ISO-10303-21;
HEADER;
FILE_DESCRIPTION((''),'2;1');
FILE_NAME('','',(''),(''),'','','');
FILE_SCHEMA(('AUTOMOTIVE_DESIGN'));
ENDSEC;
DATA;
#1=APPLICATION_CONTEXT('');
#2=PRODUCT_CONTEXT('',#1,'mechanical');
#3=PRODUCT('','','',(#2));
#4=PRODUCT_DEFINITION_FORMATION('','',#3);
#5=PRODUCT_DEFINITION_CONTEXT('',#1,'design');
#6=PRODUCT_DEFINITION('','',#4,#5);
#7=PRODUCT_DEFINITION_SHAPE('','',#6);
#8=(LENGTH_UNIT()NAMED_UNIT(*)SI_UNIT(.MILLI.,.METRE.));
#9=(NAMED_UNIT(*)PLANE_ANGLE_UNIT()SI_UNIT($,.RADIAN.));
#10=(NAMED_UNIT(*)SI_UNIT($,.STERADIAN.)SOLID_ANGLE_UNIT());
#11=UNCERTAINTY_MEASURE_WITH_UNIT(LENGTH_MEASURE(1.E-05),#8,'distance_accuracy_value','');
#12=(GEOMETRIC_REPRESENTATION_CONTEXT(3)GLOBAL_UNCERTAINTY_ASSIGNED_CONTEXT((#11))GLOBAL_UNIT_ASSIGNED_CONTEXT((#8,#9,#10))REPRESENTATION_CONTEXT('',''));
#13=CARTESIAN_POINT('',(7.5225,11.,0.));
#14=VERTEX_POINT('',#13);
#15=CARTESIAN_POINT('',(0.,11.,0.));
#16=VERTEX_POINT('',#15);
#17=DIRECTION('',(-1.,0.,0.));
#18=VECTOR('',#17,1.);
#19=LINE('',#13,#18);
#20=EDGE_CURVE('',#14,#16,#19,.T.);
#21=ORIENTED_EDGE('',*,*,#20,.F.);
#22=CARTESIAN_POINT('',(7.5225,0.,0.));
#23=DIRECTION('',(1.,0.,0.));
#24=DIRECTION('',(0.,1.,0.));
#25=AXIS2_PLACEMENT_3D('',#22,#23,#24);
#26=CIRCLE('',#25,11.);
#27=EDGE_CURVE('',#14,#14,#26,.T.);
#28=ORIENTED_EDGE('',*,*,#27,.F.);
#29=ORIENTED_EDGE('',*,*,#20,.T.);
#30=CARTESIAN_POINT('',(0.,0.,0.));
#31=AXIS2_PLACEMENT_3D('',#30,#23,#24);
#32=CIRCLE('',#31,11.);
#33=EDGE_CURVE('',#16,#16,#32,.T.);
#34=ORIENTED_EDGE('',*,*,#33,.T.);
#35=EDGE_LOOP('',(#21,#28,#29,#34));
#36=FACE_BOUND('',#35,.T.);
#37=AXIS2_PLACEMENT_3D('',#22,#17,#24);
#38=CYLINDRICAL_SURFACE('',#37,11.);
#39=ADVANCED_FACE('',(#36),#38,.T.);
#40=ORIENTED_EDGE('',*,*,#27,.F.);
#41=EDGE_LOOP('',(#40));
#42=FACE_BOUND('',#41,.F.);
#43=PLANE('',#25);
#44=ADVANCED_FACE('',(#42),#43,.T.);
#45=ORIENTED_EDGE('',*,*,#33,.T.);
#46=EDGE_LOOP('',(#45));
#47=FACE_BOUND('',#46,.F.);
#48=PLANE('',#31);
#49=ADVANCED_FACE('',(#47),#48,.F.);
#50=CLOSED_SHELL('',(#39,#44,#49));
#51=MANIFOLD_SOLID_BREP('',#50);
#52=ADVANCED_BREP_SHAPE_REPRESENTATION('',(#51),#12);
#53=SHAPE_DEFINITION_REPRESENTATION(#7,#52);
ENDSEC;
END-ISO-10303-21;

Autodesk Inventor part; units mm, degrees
ref_plane "YZ Plane" through (0, 0, 0) normal (1, 0, 0) x (0, 1, 0)
ref_plane "XZ Plane" through (0, 0, 0) normal (0, 1, 0) x (-1, 0, 0)
sketch "Section Profile" plane through (0, 0, 0) normal (0, 0, 1) x (1, 0, 0)
  line L0 (0, 0) -> (7.5225, 0)
  line L1 (7.5225, 0) -> (7.5225, 6.5537)
  line L2 (7.5225, 6.5537) -> (0, 6.5537)
  line L3 (0, 6.5537) -> (0, 0)
  line L4 (0, 0) -> (7.5225, 0)
  line L5 (7.5225, 0) -> (7.5225, 11)
  line L6 (7.5225, 11) -> (0, 11)
  line L7 (0, 11) -> (0, 0)
  point P0 (3.7612, 11)
  dimension "d0" = 7.5225
  dimension "d1" = 7.5225
  dimension "d2" = 3.7612
  dimension "d3" = 13.1074
  dimension "d4" = 22
ref_plane "Chain Plane" through (3.7612, 11, 0) normal (1, 0, 0) x (0, 1, 0)
revolve "Shroud" add sketch "Section Profile" angle 360 about axis through (0, 0, 0) along (1, 0, 0) contours L3 L2 L1 L0
revolve "Strand" add sketch "Section Profile" angle 360 about axis through (0, 0, 0) along (1, 0, 0)
pattern_of_one "Strand Pattern"
equation "\"d0\" = da_Bf"
equation "\"d1\" = da_Bs"
equation "\"d3\" = da_Ds"
equation "\"d4\" = da_D"
equation "\"d9\" = da_pt"
equation "\"da_D\" = 22"
equation "\"da_Ds\" = 13.10739"
equation "\"da_Bf\" = 7.52246"
equation "\"da_Bs\" = 7.52246"
equation "\"da_pt\" = 14.3764"
properties part number "Flat Idler2" material "Steel"
